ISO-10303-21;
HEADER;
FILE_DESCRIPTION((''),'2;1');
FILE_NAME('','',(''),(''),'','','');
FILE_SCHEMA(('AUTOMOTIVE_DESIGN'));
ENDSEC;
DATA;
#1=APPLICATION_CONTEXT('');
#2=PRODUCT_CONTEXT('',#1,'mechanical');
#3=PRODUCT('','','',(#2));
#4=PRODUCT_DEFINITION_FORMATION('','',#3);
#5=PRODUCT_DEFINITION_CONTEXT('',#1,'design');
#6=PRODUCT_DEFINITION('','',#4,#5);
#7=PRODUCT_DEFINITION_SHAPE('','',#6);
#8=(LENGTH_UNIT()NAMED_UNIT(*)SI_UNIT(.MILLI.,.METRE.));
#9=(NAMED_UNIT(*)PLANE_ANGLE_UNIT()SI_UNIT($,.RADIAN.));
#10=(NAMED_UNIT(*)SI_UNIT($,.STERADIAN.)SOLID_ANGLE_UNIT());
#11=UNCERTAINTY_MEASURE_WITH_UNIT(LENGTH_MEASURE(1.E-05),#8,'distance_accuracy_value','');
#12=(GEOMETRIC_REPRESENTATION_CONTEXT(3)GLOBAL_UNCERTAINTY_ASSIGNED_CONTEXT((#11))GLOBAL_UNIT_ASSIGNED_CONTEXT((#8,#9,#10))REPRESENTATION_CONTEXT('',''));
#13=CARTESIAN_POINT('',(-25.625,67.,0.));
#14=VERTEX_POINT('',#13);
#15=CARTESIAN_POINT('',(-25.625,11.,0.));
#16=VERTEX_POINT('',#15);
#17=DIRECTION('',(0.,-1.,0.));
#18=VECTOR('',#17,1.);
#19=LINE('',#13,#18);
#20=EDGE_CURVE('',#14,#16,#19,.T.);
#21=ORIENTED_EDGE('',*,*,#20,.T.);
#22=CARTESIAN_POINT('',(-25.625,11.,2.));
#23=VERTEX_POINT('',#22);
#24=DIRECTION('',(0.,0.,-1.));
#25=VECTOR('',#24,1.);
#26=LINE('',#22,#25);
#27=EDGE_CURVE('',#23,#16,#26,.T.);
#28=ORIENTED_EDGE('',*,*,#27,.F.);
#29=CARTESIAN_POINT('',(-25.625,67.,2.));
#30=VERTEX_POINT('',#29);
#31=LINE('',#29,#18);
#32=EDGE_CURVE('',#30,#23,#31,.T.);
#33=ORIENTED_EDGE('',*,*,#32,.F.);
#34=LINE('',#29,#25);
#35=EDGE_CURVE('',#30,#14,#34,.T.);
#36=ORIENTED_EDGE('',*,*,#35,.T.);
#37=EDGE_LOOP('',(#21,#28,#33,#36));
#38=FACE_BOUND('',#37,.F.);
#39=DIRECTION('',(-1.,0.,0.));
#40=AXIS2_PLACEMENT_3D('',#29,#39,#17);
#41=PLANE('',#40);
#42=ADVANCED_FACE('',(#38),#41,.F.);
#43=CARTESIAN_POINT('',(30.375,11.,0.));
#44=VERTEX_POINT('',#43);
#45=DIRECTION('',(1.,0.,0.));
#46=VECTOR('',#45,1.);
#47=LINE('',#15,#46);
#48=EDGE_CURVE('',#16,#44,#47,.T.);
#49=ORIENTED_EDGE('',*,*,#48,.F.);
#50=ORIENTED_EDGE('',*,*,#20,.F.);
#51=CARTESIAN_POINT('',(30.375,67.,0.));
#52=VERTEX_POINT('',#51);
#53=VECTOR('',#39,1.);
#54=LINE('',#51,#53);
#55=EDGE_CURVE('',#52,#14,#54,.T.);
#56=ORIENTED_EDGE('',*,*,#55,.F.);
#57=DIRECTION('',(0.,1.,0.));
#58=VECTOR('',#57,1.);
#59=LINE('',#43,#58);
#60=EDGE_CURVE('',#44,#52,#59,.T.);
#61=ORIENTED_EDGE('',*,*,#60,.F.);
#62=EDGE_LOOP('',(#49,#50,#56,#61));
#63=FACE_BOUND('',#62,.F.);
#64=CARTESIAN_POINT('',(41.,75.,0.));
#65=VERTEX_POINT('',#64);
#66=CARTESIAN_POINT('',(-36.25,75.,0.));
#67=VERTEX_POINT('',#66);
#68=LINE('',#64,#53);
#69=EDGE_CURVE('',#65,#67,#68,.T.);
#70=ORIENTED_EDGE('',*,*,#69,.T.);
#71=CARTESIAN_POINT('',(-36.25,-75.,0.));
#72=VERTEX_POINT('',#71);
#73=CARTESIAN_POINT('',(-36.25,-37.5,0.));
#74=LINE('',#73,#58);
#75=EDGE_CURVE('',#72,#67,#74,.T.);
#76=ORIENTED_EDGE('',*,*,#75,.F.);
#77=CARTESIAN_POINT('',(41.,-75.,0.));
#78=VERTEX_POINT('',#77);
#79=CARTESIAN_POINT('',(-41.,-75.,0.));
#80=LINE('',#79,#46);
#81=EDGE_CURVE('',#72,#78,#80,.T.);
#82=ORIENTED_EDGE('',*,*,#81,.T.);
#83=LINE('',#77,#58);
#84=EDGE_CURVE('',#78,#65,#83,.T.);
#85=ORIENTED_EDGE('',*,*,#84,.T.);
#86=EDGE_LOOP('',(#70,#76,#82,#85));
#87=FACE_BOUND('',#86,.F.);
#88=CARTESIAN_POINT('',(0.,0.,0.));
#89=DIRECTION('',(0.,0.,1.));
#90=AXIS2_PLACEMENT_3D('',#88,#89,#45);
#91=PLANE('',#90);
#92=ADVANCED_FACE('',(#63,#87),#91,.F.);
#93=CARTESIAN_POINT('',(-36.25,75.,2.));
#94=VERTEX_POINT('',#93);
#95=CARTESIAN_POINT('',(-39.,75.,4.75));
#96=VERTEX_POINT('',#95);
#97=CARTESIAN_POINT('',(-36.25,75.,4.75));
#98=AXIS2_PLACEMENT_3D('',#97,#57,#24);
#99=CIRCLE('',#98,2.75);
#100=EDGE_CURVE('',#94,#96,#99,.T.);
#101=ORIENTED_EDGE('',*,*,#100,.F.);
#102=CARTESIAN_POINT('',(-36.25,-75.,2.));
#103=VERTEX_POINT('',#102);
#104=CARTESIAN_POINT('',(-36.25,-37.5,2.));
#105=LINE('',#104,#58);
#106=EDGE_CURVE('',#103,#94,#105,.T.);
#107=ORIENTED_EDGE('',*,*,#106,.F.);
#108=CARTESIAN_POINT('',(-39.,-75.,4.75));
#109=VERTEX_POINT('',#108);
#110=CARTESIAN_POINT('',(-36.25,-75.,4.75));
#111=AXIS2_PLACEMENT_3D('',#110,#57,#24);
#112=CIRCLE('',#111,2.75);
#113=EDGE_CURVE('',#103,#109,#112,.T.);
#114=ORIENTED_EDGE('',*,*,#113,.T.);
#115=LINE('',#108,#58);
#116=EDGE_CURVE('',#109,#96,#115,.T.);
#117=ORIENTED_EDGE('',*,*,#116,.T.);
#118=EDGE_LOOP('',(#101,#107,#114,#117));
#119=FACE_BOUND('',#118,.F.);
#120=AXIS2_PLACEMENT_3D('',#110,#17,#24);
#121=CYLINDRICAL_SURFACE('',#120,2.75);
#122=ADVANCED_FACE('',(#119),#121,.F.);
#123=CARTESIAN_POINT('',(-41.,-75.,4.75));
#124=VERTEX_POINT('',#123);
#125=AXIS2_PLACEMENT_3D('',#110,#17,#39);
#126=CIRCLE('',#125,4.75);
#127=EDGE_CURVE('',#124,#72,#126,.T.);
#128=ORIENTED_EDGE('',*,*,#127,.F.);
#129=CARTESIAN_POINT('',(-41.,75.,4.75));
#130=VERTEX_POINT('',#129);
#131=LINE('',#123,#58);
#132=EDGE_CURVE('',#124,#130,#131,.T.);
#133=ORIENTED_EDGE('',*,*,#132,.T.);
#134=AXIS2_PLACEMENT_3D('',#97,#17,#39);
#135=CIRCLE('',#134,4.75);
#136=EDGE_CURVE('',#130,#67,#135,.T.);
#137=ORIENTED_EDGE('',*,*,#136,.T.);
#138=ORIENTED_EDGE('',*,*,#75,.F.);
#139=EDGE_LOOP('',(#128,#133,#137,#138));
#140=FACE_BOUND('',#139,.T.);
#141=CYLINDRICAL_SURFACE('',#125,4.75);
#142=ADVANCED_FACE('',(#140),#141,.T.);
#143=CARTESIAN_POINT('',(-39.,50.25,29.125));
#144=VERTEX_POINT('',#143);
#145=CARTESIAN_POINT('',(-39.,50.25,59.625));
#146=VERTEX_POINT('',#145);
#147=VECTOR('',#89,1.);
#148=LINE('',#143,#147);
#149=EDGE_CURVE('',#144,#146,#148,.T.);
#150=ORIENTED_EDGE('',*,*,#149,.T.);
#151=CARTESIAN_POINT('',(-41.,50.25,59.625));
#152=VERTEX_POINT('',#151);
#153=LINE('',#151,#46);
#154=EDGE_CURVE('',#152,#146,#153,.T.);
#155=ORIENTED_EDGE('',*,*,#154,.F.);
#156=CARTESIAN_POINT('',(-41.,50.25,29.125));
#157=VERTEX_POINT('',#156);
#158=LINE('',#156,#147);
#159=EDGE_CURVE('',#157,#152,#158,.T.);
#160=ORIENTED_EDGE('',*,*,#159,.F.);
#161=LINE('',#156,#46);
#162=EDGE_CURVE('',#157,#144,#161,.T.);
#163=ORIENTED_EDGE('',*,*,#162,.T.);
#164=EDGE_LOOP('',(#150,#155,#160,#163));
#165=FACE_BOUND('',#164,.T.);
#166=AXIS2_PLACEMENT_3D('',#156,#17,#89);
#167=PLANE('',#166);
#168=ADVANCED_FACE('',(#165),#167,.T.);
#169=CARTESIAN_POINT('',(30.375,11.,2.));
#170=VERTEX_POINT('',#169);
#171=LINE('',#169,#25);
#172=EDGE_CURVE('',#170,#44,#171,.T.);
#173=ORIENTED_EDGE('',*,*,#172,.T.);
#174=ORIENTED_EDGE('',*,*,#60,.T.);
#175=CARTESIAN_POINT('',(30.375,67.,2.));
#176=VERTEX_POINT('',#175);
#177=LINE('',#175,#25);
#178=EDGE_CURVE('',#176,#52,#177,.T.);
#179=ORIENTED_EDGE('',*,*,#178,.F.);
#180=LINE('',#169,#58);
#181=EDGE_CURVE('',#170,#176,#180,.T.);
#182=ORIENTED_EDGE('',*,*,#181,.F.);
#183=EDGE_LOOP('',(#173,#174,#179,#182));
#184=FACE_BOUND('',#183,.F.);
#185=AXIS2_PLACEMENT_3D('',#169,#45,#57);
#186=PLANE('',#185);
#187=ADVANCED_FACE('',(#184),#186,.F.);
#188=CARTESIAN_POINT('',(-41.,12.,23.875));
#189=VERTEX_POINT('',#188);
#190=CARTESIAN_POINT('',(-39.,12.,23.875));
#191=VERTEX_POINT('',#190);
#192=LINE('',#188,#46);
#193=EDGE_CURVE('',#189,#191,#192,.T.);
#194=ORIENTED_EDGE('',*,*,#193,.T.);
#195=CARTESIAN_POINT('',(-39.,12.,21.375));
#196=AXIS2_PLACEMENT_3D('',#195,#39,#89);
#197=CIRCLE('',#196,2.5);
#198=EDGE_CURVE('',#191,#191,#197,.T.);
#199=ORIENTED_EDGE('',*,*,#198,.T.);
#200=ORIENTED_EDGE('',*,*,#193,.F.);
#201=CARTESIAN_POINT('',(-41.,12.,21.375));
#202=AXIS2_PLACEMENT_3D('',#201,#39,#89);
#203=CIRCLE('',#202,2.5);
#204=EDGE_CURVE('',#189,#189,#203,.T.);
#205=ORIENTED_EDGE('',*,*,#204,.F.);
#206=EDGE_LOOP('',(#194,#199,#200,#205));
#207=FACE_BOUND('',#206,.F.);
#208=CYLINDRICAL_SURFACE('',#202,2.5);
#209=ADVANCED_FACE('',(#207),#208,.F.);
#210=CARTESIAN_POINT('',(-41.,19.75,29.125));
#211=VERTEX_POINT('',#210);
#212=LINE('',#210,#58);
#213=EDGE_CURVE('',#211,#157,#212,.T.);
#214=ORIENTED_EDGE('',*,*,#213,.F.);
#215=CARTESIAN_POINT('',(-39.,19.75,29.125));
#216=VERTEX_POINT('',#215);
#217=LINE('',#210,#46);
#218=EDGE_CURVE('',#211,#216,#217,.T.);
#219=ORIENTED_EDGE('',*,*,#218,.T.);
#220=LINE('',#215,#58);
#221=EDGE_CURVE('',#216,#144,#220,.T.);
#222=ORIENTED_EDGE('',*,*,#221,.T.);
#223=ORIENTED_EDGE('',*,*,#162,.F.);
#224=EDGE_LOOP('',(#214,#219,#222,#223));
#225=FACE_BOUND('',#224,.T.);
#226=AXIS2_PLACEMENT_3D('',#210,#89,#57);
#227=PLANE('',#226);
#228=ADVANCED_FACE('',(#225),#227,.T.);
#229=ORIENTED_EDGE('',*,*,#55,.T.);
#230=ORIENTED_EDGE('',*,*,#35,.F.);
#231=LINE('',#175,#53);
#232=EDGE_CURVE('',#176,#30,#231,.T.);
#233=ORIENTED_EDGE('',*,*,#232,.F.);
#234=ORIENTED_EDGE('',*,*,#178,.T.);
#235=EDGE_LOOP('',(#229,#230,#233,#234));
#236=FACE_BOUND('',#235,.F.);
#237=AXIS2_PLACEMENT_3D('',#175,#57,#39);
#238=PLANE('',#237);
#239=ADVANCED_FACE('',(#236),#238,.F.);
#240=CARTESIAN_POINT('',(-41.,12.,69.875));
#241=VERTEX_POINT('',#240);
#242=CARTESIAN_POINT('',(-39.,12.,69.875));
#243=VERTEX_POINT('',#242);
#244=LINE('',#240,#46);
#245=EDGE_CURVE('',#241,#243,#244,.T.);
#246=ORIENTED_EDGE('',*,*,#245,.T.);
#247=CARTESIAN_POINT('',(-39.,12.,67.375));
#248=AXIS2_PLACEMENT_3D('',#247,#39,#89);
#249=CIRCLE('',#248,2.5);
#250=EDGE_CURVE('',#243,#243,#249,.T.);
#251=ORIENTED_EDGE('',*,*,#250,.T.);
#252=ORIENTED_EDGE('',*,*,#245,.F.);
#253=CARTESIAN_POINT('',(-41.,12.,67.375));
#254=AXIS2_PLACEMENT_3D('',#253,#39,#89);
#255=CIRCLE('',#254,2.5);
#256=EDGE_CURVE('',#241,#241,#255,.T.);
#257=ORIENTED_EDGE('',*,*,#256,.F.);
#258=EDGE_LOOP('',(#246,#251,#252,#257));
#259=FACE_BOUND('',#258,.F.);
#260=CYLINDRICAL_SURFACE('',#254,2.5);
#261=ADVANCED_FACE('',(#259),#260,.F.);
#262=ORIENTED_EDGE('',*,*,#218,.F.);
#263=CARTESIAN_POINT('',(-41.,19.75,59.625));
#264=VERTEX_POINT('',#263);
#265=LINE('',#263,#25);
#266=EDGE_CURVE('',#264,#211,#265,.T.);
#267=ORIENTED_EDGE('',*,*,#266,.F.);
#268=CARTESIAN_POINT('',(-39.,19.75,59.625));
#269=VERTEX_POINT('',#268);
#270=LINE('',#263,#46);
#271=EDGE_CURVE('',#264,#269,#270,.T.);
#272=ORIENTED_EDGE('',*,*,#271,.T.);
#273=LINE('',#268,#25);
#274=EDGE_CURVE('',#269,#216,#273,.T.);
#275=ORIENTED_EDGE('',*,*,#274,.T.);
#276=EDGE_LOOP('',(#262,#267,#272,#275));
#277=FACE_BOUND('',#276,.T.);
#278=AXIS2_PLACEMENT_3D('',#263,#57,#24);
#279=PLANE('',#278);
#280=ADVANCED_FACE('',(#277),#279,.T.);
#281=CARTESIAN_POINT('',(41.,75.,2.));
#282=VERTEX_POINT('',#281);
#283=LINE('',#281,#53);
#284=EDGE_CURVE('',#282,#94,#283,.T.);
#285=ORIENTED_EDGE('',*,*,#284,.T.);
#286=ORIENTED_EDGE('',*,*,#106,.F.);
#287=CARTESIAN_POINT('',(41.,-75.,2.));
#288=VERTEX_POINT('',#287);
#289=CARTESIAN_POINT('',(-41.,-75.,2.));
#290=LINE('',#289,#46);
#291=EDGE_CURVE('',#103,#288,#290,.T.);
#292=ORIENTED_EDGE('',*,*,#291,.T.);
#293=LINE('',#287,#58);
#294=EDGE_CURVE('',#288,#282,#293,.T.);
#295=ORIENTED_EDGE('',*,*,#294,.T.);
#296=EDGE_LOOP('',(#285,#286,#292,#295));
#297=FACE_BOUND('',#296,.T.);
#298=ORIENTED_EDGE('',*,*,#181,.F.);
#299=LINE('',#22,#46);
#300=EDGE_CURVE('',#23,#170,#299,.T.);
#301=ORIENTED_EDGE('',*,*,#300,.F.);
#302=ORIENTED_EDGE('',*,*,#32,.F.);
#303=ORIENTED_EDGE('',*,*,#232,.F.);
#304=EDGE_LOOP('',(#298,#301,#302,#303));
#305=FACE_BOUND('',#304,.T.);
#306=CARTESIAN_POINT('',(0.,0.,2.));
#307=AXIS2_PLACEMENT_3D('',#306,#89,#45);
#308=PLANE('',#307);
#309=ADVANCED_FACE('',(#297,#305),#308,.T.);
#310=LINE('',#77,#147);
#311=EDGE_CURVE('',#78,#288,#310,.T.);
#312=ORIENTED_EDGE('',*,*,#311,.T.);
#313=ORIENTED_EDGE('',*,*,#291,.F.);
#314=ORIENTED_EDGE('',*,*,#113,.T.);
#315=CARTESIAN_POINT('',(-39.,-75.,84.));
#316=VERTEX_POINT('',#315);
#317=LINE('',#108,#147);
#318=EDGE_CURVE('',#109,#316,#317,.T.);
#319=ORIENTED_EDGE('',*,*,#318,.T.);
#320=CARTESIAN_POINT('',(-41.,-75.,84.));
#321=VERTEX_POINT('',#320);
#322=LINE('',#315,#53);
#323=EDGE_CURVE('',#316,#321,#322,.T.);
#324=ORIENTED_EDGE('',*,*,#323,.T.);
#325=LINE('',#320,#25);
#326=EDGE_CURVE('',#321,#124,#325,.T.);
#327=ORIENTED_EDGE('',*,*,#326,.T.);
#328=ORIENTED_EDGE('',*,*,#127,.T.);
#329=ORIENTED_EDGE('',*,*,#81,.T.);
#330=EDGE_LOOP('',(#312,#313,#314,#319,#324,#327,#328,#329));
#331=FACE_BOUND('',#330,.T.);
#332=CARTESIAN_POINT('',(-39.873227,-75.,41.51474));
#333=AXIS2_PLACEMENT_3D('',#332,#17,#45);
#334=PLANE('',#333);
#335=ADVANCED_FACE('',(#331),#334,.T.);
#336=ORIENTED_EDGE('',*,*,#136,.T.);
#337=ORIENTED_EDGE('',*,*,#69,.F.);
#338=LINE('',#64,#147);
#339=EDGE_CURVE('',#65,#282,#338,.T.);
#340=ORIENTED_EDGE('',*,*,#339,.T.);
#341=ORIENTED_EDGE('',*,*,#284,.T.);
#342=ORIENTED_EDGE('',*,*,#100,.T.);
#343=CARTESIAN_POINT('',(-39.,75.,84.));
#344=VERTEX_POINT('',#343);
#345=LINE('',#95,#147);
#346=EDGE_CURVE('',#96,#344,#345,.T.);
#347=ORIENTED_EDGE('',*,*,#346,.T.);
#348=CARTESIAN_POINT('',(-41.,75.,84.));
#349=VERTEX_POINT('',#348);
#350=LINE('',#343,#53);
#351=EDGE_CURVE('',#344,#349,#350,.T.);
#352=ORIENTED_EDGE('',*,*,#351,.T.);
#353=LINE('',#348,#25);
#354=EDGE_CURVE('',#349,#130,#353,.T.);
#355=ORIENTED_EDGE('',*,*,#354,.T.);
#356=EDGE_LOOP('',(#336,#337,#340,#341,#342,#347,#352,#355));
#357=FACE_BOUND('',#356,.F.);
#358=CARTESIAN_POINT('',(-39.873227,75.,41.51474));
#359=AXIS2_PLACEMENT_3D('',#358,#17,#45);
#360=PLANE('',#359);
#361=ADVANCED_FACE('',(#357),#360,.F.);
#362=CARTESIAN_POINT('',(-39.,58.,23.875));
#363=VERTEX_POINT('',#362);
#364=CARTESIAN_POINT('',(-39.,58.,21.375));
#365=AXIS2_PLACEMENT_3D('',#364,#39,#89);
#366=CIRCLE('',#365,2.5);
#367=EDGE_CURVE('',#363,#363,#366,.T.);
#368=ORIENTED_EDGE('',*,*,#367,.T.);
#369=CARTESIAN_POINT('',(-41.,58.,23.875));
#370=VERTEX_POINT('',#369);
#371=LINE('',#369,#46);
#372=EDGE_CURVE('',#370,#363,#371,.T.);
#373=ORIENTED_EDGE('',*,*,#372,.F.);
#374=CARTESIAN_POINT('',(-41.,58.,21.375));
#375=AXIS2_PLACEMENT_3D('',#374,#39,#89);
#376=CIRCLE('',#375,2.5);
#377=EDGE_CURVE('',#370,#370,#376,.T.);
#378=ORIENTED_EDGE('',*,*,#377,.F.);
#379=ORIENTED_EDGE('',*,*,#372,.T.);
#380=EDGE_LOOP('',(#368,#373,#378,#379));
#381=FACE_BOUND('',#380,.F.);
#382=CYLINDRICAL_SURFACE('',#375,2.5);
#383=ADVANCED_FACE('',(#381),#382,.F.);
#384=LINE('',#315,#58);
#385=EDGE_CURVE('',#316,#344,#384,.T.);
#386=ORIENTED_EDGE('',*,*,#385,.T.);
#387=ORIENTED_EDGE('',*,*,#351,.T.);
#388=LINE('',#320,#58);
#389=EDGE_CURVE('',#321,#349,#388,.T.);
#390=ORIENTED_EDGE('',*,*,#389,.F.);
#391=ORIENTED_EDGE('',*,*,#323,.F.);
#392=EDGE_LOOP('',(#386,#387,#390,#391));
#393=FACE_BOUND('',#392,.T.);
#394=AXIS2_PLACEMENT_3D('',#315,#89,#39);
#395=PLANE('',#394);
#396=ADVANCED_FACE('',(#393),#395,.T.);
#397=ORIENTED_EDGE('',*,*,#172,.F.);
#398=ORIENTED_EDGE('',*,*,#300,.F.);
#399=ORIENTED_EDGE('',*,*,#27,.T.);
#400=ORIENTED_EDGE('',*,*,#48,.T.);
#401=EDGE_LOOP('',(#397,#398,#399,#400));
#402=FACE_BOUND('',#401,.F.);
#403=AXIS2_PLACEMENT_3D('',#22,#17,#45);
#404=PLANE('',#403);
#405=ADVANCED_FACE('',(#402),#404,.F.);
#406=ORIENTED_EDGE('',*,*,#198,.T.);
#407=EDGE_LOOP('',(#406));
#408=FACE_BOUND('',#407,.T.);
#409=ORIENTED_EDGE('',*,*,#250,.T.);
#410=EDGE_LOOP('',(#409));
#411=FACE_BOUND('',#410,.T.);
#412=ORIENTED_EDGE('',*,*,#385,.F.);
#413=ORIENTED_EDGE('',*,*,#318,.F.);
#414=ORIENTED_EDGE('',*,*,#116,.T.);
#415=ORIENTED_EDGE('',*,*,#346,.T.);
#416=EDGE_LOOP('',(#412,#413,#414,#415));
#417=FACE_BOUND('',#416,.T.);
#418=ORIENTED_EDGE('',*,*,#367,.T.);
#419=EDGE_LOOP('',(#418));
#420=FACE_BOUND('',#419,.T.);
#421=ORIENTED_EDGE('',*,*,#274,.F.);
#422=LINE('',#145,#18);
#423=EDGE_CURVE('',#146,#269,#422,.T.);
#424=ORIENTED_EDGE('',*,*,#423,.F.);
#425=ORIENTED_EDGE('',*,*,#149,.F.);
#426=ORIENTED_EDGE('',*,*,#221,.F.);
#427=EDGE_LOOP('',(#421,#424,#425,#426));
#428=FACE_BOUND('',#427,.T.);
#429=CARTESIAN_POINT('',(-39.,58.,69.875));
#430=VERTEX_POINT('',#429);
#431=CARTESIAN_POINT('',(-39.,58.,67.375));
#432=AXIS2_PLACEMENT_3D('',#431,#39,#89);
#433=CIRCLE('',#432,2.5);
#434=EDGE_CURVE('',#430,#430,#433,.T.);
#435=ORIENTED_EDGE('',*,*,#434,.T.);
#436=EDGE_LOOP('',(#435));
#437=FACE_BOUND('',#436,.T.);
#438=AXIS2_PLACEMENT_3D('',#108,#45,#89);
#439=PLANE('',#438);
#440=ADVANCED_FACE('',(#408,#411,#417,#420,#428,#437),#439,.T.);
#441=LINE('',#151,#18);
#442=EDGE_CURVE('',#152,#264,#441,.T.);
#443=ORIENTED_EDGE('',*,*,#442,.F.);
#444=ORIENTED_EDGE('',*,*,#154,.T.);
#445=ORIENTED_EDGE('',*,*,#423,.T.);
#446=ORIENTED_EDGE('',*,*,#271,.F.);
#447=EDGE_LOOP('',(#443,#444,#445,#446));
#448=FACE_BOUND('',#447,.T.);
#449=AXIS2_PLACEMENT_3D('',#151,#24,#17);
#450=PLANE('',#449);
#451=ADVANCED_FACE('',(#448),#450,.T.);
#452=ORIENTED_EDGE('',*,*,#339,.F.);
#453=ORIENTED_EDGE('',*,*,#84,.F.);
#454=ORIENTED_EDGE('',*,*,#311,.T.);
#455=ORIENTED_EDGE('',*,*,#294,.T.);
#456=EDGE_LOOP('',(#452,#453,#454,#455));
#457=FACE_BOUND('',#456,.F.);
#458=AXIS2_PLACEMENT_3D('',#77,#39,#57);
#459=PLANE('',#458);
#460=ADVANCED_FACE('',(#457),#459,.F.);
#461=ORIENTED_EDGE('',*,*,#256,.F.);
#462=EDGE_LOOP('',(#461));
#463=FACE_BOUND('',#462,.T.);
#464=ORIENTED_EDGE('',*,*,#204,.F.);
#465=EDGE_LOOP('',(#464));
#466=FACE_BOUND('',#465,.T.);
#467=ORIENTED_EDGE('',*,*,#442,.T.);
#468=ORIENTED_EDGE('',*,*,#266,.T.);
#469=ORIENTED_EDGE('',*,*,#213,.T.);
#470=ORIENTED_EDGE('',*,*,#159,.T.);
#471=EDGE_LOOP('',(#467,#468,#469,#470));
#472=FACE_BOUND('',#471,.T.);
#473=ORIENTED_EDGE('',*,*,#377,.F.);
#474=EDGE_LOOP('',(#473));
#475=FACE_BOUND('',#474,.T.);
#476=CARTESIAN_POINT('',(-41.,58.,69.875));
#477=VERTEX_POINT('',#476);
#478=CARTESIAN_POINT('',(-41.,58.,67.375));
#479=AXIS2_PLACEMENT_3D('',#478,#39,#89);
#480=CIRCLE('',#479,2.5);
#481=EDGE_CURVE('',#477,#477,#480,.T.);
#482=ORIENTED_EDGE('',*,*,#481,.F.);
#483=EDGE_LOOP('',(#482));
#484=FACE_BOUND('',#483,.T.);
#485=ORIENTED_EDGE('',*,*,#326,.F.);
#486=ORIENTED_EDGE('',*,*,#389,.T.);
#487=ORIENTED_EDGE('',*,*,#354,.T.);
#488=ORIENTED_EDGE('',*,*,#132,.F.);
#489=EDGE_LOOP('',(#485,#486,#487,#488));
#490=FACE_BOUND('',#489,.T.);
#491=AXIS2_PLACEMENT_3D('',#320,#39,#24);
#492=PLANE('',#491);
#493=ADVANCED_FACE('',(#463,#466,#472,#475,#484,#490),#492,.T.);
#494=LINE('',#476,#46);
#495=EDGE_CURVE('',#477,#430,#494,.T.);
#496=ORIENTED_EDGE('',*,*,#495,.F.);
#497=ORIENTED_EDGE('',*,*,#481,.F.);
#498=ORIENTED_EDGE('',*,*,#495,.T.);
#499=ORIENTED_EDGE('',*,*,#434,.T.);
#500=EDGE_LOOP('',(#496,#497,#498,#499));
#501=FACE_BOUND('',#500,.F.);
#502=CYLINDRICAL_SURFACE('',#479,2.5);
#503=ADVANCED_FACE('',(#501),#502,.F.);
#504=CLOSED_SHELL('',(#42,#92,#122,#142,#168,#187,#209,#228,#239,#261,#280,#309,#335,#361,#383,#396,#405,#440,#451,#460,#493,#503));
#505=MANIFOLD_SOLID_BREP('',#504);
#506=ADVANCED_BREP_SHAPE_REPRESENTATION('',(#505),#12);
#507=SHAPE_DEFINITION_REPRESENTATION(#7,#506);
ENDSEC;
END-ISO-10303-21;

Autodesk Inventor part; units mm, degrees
ref_plane "YZ Plane" through (0, 0, 0) normal (1, 0, 0) x (0, 1, 0)
ref_plane "XZ Plane" through (0, 0, 0) normal (0, 1, 0) x (-1, 0, 0)
ref_plane "XY Plane" through (0, 0, 0) normal (0, 0, 1) x (1, 0, 0)
sketch "Sketch1" plane through (0, 0, 0) normal (0, 0, 1) x (1, 0, 0)
  line L0 (-41, -75) -> (41, -75)
  line L1 (41, -75) -> (41, 75)
  line L2 (41, 75) -> (-41, 75)
  line L3 (-41, 75) -> (-41, -75)
  line L4 (-41, -75) -> (41, 75) construction
  line L5 (41, -75) -> (-41, 75) construction
  point P0 (0, 0)
  dimension "d154" = 82
  dimension "d155" = 150
extrude "Plate5" add sketch "Sketch1" along normal blind 2
sketch "Sketch7" plane through (-39, -75, 0) normal (-1, 0, 0) x (0, -1, 0)
  line L0 (-150, 0) -> (0, 0)
  line L1 (0, 0) -> (0, 84)
  line L2 (0, 84) -> (-150, 84)
  line L3 (-150, 84) -> (-150, 0)
edge flange "Flange3" height 84 angle 90 thickness 2 bend radius 2.75 thickness toward (-1, 0, 0) relief round relief width 2 relief depth 1 edges at (-41, 0, 2) wall of the first edge with corners at (-39, 75, 0) (-39, -75, 0) (-39, -75, 84) (-39, 75, 84)
bend "Bend3"
corner "Corner3"
sketch "Sketch8" plane through (0, 0, 2) normal (0, 0, 1) x (1, 0, 0)
  line L0 (41, 75) -> (41, -75) projected
  line L1 (-36.25, 75) -> (41, 75) projected
  line L2 (30.375, 67) -> (-25.625, 67)
  line L3 (-25.625, 67) -> (-25.625, 11)
  line L4 (-25.625, 11) -> (30.375, 11)
  line L5 (30.375, 11) -> (30.375, 67)
  line L6 (30.375, 67) -> (-25.625, 11) construction
  line L7 (-25.625, 67) -> (30.375, 11) construction
  point P0 (0, 0)
  point P1 (2.375, 39)
  point P2 (2.375, 75)
  dimension "d167" = 56
  dimension "d168" = 56
  dimension "d169" = 8
extrude "Cut1" cut sketch "Sketch8" against normal blind 2
sketch "Sketch9" plane through (-41, -75, 84) normal (-1, 0, 0) x (0, 0, 1)
  line L0 (-24.375, 94.75) -> (-54.875, 94.75)
  line L1 (-54.875, 94.75) -> (-54.875, 125.25)
  line L2 (-54.875, 125.25) -> (-24.375, 125.25)
  line L3 (-24.375, 125.25) -> (-24.375, 94.75)
  line L4 (-24.375, 94.75) -> (-54.875, 125.25) construction
  line L5 (-54.875, 94.75) -> (-24.375, 125.25) construction
  circle A0 centre (-16.625, 87) radius 2.5
  circle A1 centre (-62.625, 87) radius 2.5
  circle A2 centre (-62.625, 133) radius 2.5
  circle A3 centre (-16.625, 133) radius 2.5
  circle A4 centre (-39.625, 110) radius 32.5269 construction
  line L6 (-54.875, 94.75) -> (-62.625, 87) construction
  line L7 (-14.125, 84.5) -> (-65.125, 84.5) construction
  line L8 (-65.125, 84.5) -> (-65.125, 135.5) construction
  line L9 (-65.125, 135.5) -> (-14.125, 135.5) construction
  line L10 (-14.125, 135.5) -> (-14.125, 84.5) construction
  line L11 (-14.125, 84.5) -> (-65.125, 135.5) construction
  line L12 (-65.125, 84.5) -> (-14.125, 135.5) construction
  line L13 (-79.25, 150) -> (0, 150) projected
  line L14 (-39.625, 150) -> (-39.625, 110) construction
  circle A5 centre (-62.625, 133) radius 10.9602 construction
  line L15 (-16.625, 87) -> (-62.625, 87) construction
  line L16 (-62.625, 87) -> (-62.625, 133) construction
  line L17 (-62.625, 133) -> (-16.625, 133) construction
  line L18 (-16.625, 133) -> (-16.625, 87) construction
  line L19 (-16.625, 87) -> (-62.625, 133) construction
  line L20 (-62.625, 87) -> (-16.625, 133) construction
  point P0 (-84, 75)
  point P1 (-104.8197, 150.8767)
  point P2 (-104.8197, 150.8767)
  dimension "d181" = 21.9203
  dimension "d174" = 30.5
  dimension "d175" = 30.5
  dimension "d176" = 5
  dimension "d179" = 40
  dimension "d180" = 51
  dimension "d184" = 46
extrude "Cut2" cut sketch "Sketch9" against normal blind 2
properties part number "SLM 1652 FDS Central tube wall" material "Stainless Steel"
